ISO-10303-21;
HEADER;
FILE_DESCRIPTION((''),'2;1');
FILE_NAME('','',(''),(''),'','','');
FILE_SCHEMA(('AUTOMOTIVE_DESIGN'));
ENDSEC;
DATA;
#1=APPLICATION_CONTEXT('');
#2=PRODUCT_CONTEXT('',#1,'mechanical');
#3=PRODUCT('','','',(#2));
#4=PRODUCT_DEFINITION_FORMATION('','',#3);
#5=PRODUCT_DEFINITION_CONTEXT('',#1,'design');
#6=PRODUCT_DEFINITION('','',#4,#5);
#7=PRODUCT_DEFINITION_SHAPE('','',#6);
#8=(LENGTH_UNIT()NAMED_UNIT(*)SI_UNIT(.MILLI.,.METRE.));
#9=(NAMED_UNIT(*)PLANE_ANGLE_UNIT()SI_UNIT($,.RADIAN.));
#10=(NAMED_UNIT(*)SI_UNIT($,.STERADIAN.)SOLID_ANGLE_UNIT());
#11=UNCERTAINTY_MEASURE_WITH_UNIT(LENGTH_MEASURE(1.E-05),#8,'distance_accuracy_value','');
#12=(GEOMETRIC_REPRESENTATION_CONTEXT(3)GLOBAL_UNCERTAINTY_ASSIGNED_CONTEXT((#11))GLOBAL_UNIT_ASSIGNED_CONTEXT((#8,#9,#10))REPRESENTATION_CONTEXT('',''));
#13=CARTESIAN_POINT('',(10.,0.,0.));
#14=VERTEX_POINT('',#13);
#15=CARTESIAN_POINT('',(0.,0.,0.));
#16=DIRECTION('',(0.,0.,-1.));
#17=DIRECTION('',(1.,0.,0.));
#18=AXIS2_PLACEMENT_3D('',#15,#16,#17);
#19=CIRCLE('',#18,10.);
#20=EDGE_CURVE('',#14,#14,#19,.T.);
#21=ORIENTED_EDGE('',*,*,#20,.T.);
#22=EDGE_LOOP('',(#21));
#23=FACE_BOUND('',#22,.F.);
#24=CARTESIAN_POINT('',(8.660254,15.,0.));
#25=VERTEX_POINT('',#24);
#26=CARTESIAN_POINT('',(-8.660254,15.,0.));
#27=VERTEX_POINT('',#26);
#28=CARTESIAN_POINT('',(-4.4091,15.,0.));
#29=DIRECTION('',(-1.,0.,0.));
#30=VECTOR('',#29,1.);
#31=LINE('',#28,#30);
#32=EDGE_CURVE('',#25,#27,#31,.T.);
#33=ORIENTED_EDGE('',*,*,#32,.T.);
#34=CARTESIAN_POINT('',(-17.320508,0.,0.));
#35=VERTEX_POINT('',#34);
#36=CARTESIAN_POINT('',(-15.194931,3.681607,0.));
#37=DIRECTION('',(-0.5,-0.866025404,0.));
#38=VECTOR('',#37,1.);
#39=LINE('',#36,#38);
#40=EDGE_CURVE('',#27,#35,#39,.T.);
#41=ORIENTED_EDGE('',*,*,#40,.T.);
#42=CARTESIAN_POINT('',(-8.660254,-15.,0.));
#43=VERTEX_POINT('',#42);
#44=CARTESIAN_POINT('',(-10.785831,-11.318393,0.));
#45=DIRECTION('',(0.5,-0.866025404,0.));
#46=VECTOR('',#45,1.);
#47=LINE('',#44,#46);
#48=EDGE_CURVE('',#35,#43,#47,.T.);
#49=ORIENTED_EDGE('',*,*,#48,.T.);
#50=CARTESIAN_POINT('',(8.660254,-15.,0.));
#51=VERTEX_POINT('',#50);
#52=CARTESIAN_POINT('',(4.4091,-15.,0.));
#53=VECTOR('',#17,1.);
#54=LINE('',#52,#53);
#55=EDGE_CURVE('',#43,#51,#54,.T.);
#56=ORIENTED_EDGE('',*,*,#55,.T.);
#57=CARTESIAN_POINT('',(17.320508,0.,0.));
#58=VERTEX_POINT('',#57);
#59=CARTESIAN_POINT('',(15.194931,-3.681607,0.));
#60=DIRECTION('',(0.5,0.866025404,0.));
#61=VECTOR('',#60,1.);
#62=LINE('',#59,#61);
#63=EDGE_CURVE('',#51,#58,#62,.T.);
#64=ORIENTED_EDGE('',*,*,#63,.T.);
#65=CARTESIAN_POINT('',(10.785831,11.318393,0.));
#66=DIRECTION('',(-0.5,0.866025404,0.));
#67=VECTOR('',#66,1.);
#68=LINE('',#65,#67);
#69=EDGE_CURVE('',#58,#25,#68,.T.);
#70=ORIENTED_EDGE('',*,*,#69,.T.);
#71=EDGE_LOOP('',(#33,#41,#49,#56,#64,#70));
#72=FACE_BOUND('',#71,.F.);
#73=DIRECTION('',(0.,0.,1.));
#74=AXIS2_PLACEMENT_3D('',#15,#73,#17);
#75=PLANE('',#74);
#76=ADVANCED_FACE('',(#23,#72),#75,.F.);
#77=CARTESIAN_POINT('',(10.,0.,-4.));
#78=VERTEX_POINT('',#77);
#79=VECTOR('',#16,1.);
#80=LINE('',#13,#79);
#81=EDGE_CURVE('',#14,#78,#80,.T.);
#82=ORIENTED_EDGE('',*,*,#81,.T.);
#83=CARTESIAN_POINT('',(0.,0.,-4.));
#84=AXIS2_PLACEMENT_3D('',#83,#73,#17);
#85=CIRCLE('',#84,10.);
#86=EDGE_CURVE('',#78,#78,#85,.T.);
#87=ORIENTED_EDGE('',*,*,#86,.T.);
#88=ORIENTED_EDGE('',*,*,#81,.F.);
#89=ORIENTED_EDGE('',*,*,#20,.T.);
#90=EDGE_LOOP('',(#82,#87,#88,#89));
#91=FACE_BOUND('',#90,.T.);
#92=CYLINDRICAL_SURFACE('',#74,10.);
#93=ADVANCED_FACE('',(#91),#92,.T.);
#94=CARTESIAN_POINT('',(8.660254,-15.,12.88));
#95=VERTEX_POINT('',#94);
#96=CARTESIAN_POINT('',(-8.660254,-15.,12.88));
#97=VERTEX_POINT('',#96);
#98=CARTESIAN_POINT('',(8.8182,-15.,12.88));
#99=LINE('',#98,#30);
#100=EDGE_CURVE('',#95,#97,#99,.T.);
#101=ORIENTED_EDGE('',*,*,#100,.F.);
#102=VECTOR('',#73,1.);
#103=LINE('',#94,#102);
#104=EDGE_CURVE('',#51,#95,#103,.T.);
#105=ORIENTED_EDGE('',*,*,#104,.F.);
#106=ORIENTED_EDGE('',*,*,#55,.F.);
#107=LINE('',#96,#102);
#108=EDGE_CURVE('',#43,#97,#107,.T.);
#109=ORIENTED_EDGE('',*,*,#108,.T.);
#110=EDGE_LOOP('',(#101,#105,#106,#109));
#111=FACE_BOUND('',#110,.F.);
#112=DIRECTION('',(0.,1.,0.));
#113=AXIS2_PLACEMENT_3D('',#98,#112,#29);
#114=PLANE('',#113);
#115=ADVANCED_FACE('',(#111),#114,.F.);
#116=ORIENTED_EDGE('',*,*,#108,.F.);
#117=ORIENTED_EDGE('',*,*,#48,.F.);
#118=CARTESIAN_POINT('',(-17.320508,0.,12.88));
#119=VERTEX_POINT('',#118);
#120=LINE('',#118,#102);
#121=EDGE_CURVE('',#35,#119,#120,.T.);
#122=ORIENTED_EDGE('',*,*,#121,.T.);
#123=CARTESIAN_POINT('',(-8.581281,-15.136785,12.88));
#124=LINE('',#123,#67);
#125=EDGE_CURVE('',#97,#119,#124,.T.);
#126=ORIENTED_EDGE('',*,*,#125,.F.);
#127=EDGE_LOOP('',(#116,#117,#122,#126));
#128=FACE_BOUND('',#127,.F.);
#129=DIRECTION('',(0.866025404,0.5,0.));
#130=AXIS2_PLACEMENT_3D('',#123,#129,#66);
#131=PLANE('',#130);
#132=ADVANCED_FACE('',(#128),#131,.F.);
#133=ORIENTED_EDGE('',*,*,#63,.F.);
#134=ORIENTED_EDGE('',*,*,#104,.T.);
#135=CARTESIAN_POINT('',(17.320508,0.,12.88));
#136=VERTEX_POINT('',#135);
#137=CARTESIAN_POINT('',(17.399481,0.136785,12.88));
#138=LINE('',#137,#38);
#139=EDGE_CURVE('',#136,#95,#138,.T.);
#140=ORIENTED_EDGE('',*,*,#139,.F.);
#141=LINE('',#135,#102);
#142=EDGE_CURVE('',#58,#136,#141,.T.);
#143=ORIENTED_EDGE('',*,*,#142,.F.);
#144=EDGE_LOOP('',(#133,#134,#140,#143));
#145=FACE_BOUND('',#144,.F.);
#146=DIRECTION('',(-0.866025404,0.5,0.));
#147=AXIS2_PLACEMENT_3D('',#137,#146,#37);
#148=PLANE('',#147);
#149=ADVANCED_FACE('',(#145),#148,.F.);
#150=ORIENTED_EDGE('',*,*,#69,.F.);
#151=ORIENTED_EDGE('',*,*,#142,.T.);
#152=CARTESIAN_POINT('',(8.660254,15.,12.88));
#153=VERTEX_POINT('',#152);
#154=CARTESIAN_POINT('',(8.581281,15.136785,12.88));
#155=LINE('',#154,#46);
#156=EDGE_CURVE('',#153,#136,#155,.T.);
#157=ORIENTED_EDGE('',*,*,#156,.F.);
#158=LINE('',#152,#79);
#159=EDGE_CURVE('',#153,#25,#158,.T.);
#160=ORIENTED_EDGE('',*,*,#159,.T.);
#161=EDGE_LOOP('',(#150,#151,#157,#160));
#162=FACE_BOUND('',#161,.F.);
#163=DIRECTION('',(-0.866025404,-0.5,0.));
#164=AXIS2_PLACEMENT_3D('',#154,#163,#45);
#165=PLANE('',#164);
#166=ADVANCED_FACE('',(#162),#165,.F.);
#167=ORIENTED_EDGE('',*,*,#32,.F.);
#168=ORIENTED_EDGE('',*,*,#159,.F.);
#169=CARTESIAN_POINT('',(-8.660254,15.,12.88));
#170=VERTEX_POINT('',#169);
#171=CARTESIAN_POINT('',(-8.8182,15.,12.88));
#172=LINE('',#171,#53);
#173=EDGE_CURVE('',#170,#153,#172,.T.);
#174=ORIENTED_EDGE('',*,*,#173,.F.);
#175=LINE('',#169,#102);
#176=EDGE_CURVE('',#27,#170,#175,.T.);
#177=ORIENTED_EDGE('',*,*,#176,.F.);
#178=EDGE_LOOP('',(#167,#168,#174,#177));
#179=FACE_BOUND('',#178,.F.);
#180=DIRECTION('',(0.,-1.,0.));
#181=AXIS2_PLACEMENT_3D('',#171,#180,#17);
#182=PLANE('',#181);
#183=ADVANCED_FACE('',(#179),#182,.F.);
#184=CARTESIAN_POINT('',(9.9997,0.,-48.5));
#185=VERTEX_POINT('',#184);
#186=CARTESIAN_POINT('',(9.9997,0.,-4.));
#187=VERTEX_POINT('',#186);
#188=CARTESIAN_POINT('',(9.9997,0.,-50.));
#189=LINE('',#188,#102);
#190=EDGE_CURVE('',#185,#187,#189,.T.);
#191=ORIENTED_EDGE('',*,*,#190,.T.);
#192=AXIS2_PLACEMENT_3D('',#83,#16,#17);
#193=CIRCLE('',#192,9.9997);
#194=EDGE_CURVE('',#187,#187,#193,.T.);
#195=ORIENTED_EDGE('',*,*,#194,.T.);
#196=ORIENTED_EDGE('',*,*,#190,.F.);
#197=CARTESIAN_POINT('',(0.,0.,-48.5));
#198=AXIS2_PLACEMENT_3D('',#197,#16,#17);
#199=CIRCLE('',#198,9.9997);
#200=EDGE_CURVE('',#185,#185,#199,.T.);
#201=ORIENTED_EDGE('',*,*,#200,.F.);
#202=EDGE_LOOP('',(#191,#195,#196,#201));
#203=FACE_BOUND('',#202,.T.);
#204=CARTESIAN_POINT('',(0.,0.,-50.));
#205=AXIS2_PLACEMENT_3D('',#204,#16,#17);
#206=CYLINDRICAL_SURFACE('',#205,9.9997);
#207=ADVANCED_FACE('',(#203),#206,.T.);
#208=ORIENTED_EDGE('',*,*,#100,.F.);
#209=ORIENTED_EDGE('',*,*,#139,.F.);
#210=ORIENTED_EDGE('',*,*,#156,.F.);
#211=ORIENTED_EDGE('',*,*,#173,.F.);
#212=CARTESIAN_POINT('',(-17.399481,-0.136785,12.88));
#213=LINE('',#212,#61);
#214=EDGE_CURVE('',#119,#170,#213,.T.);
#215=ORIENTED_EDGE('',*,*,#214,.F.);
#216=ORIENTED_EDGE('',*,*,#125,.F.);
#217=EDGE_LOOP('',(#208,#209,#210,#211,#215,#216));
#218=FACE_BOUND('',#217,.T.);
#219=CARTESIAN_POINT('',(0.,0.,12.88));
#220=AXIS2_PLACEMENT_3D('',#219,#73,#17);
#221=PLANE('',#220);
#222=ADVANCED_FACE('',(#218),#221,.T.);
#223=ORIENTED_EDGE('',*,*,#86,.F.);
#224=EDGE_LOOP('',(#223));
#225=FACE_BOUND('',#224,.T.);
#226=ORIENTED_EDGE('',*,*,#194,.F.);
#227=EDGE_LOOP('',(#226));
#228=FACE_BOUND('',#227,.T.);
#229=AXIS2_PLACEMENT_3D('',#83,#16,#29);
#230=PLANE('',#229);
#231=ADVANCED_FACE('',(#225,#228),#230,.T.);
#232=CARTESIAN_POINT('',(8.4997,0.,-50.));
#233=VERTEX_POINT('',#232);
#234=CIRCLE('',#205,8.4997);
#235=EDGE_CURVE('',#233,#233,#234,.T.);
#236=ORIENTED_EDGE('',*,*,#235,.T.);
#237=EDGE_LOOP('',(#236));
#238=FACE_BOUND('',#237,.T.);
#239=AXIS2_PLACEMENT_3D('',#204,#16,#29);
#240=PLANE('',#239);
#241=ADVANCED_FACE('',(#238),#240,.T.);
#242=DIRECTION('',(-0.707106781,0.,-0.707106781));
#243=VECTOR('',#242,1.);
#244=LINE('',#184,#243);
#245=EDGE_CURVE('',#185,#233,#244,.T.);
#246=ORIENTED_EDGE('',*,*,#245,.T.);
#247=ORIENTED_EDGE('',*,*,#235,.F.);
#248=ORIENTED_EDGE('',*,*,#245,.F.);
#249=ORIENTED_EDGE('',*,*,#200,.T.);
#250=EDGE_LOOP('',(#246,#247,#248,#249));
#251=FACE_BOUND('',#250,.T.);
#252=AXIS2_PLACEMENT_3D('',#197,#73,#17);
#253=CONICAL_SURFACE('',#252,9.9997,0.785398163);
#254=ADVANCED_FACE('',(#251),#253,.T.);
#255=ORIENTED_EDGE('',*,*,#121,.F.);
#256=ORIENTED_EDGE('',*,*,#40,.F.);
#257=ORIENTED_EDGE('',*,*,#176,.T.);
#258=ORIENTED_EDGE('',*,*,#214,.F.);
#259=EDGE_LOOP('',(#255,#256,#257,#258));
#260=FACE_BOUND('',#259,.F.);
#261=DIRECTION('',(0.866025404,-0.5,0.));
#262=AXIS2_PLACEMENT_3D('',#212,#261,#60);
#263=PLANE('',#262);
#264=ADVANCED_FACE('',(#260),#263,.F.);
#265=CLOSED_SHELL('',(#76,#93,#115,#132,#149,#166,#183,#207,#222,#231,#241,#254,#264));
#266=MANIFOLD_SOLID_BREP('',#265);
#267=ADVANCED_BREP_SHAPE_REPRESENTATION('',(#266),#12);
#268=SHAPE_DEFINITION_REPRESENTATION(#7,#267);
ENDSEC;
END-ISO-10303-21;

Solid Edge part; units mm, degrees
sketch "Sketch1" plane through (0, 0, 0) normal (0, 0, 1) x (1, 0, 0)
  circle A0 centre (0, 0) radius 17.4
  dimension "D1" = 34.8
extrude "Protrusion1" add sketch "Sketch1" along normal blind 12.88
sketch "Sketch2" plane through (0, 0, 0) normal (0, 0, -1) x (1, 0, 0)
  circle A0 centre (0, 0) radius 10
extrude "Protrusion2" add sketch "Sketch2" along normal blind 50
sketch "Sketch3" plane through (0, 0, -50) normal (0, 0, -1) x (1, 0, 0)
  circle A0 centre (0, 0) radius 9.9997
extrude "Cutout1" cut sketch "Sketch3" against normal blind 46 flip side to cut
chamfer "Chamfer_1" distance 1.5 angle 45 1 edges at (-9.9997, 0, -50)
sketch "Sketch4" plane through (0, 0, 12.88) normal (0, 0, 1) x (1, 0, 0)
  line L0 (-8.8182, 15) -> (8.8182, 15)
  dimension "D1" = 30
extrude "Cutout2" cut sketch "Sketch4" against normal up to next material side at (0, 15.05, 12.88)
pattern_circular "Pattern1" count 6 over 360 about axis through (0, 0, 12.88) along (0, 0, 1) of "Cutout2"
properties part number "24104018"
